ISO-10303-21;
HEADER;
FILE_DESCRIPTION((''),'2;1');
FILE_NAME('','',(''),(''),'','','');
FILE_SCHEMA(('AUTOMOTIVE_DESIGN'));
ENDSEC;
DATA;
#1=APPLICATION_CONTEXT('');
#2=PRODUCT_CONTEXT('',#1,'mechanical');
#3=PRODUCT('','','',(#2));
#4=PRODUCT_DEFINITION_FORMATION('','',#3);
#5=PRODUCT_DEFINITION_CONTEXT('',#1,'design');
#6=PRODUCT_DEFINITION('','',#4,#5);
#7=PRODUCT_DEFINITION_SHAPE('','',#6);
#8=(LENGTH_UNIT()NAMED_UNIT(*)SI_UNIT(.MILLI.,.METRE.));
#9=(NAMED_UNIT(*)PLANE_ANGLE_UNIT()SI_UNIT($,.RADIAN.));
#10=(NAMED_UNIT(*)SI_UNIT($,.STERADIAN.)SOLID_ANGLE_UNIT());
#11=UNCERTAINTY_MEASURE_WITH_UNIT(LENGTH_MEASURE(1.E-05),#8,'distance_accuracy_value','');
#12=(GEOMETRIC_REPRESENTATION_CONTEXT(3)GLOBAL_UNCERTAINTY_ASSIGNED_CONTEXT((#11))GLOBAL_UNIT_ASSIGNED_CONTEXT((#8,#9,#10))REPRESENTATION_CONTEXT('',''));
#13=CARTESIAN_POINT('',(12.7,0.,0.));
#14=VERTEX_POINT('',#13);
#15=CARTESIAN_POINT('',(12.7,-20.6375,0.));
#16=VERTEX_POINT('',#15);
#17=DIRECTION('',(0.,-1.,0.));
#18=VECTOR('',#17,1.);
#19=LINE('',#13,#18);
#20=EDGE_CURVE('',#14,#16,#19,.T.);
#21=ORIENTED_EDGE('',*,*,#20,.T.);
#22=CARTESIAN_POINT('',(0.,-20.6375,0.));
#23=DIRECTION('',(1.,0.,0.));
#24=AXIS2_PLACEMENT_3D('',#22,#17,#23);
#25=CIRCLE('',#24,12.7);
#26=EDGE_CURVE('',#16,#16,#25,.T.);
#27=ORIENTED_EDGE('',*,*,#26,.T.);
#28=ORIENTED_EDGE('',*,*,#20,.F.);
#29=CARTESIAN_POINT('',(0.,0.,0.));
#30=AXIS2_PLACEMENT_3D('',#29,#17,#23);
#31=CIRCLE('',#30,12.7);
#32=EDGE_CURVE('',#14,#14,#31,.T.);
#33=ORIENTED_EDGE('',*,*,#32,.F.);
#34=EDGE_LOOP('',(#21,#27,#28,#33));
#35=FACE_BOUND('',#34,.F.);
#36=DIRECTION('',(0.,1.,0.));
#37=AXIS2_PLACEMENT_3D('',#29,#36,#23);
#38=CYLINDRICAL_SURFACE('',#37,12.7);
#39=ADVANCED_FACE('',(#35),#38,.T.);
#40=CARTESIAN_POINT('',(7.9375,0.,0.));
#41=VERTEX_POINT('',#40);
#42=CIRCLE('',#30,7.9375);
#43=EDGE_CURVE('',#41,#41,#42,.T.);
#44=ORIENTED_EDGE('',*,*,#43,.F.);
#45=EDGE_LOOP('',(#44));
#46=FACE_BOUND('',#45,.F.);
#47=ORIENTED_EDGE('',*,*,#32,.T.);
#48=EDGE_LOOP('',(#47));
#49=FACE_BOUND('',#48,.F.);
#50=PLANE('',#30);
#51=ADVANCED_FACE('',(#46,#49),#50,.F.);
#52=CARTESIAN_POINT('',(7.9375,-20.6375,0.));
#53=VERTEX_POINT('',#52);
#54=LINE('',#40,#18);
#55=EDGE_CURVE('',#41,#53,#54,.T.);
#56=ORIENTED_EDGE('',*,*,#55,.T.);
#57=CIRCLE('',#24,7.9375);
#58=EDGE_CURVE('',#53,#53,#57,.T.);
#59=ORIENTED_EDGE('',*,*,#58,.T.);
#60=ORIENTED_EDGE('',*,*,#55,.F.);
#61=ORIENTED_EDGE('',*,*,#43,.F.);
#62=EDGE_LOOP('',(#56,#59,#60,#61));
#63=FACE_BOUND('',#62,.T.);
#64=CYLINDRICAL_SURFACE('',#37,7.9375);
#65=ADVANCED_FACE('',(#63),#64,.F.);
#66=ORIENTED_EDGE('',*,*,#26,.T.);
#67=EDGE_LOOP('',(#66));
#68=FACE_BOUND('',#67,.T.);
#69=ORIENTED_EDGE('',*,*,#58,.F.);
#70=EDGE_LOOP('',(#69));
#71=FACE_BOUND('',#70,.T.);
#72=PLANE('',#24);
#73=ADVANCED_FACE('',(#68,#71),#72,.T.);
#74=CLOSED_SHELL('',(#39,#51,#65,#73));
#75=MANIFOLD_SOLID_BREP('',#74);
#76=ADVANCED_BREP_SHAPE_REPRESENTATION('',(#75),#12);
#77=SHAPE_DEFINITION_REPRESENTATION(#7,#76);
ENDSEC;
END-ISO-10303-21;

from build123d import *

# Parameters (mm, degrees)
F0_R     = 12.7
F1_DEPTH = 20.6375
F2_R     = 7.9375
F3_DEPTH = 20.6375


# Not quite as in the source:
# - a length typed as a fraction of an inch, garbled in the dataset ("3 / 203.2 mm" for 3/8 in), is restored


with BuildPart() as f1:
    # F0 (on Front) → F1 (new body)
    with BuildSketch(Plane.XZ):
        Circle(F0_R)
    extrude(amount=F1_DEPTH)

    # F2 (on Front) → F3 (cut)
    with BuildSketch(Plane.XZ):
        Circle(F2_R)
    extrude(amount=F3_DEPTH, mode=Mode.SUBTRACT)


solid = f1.part
